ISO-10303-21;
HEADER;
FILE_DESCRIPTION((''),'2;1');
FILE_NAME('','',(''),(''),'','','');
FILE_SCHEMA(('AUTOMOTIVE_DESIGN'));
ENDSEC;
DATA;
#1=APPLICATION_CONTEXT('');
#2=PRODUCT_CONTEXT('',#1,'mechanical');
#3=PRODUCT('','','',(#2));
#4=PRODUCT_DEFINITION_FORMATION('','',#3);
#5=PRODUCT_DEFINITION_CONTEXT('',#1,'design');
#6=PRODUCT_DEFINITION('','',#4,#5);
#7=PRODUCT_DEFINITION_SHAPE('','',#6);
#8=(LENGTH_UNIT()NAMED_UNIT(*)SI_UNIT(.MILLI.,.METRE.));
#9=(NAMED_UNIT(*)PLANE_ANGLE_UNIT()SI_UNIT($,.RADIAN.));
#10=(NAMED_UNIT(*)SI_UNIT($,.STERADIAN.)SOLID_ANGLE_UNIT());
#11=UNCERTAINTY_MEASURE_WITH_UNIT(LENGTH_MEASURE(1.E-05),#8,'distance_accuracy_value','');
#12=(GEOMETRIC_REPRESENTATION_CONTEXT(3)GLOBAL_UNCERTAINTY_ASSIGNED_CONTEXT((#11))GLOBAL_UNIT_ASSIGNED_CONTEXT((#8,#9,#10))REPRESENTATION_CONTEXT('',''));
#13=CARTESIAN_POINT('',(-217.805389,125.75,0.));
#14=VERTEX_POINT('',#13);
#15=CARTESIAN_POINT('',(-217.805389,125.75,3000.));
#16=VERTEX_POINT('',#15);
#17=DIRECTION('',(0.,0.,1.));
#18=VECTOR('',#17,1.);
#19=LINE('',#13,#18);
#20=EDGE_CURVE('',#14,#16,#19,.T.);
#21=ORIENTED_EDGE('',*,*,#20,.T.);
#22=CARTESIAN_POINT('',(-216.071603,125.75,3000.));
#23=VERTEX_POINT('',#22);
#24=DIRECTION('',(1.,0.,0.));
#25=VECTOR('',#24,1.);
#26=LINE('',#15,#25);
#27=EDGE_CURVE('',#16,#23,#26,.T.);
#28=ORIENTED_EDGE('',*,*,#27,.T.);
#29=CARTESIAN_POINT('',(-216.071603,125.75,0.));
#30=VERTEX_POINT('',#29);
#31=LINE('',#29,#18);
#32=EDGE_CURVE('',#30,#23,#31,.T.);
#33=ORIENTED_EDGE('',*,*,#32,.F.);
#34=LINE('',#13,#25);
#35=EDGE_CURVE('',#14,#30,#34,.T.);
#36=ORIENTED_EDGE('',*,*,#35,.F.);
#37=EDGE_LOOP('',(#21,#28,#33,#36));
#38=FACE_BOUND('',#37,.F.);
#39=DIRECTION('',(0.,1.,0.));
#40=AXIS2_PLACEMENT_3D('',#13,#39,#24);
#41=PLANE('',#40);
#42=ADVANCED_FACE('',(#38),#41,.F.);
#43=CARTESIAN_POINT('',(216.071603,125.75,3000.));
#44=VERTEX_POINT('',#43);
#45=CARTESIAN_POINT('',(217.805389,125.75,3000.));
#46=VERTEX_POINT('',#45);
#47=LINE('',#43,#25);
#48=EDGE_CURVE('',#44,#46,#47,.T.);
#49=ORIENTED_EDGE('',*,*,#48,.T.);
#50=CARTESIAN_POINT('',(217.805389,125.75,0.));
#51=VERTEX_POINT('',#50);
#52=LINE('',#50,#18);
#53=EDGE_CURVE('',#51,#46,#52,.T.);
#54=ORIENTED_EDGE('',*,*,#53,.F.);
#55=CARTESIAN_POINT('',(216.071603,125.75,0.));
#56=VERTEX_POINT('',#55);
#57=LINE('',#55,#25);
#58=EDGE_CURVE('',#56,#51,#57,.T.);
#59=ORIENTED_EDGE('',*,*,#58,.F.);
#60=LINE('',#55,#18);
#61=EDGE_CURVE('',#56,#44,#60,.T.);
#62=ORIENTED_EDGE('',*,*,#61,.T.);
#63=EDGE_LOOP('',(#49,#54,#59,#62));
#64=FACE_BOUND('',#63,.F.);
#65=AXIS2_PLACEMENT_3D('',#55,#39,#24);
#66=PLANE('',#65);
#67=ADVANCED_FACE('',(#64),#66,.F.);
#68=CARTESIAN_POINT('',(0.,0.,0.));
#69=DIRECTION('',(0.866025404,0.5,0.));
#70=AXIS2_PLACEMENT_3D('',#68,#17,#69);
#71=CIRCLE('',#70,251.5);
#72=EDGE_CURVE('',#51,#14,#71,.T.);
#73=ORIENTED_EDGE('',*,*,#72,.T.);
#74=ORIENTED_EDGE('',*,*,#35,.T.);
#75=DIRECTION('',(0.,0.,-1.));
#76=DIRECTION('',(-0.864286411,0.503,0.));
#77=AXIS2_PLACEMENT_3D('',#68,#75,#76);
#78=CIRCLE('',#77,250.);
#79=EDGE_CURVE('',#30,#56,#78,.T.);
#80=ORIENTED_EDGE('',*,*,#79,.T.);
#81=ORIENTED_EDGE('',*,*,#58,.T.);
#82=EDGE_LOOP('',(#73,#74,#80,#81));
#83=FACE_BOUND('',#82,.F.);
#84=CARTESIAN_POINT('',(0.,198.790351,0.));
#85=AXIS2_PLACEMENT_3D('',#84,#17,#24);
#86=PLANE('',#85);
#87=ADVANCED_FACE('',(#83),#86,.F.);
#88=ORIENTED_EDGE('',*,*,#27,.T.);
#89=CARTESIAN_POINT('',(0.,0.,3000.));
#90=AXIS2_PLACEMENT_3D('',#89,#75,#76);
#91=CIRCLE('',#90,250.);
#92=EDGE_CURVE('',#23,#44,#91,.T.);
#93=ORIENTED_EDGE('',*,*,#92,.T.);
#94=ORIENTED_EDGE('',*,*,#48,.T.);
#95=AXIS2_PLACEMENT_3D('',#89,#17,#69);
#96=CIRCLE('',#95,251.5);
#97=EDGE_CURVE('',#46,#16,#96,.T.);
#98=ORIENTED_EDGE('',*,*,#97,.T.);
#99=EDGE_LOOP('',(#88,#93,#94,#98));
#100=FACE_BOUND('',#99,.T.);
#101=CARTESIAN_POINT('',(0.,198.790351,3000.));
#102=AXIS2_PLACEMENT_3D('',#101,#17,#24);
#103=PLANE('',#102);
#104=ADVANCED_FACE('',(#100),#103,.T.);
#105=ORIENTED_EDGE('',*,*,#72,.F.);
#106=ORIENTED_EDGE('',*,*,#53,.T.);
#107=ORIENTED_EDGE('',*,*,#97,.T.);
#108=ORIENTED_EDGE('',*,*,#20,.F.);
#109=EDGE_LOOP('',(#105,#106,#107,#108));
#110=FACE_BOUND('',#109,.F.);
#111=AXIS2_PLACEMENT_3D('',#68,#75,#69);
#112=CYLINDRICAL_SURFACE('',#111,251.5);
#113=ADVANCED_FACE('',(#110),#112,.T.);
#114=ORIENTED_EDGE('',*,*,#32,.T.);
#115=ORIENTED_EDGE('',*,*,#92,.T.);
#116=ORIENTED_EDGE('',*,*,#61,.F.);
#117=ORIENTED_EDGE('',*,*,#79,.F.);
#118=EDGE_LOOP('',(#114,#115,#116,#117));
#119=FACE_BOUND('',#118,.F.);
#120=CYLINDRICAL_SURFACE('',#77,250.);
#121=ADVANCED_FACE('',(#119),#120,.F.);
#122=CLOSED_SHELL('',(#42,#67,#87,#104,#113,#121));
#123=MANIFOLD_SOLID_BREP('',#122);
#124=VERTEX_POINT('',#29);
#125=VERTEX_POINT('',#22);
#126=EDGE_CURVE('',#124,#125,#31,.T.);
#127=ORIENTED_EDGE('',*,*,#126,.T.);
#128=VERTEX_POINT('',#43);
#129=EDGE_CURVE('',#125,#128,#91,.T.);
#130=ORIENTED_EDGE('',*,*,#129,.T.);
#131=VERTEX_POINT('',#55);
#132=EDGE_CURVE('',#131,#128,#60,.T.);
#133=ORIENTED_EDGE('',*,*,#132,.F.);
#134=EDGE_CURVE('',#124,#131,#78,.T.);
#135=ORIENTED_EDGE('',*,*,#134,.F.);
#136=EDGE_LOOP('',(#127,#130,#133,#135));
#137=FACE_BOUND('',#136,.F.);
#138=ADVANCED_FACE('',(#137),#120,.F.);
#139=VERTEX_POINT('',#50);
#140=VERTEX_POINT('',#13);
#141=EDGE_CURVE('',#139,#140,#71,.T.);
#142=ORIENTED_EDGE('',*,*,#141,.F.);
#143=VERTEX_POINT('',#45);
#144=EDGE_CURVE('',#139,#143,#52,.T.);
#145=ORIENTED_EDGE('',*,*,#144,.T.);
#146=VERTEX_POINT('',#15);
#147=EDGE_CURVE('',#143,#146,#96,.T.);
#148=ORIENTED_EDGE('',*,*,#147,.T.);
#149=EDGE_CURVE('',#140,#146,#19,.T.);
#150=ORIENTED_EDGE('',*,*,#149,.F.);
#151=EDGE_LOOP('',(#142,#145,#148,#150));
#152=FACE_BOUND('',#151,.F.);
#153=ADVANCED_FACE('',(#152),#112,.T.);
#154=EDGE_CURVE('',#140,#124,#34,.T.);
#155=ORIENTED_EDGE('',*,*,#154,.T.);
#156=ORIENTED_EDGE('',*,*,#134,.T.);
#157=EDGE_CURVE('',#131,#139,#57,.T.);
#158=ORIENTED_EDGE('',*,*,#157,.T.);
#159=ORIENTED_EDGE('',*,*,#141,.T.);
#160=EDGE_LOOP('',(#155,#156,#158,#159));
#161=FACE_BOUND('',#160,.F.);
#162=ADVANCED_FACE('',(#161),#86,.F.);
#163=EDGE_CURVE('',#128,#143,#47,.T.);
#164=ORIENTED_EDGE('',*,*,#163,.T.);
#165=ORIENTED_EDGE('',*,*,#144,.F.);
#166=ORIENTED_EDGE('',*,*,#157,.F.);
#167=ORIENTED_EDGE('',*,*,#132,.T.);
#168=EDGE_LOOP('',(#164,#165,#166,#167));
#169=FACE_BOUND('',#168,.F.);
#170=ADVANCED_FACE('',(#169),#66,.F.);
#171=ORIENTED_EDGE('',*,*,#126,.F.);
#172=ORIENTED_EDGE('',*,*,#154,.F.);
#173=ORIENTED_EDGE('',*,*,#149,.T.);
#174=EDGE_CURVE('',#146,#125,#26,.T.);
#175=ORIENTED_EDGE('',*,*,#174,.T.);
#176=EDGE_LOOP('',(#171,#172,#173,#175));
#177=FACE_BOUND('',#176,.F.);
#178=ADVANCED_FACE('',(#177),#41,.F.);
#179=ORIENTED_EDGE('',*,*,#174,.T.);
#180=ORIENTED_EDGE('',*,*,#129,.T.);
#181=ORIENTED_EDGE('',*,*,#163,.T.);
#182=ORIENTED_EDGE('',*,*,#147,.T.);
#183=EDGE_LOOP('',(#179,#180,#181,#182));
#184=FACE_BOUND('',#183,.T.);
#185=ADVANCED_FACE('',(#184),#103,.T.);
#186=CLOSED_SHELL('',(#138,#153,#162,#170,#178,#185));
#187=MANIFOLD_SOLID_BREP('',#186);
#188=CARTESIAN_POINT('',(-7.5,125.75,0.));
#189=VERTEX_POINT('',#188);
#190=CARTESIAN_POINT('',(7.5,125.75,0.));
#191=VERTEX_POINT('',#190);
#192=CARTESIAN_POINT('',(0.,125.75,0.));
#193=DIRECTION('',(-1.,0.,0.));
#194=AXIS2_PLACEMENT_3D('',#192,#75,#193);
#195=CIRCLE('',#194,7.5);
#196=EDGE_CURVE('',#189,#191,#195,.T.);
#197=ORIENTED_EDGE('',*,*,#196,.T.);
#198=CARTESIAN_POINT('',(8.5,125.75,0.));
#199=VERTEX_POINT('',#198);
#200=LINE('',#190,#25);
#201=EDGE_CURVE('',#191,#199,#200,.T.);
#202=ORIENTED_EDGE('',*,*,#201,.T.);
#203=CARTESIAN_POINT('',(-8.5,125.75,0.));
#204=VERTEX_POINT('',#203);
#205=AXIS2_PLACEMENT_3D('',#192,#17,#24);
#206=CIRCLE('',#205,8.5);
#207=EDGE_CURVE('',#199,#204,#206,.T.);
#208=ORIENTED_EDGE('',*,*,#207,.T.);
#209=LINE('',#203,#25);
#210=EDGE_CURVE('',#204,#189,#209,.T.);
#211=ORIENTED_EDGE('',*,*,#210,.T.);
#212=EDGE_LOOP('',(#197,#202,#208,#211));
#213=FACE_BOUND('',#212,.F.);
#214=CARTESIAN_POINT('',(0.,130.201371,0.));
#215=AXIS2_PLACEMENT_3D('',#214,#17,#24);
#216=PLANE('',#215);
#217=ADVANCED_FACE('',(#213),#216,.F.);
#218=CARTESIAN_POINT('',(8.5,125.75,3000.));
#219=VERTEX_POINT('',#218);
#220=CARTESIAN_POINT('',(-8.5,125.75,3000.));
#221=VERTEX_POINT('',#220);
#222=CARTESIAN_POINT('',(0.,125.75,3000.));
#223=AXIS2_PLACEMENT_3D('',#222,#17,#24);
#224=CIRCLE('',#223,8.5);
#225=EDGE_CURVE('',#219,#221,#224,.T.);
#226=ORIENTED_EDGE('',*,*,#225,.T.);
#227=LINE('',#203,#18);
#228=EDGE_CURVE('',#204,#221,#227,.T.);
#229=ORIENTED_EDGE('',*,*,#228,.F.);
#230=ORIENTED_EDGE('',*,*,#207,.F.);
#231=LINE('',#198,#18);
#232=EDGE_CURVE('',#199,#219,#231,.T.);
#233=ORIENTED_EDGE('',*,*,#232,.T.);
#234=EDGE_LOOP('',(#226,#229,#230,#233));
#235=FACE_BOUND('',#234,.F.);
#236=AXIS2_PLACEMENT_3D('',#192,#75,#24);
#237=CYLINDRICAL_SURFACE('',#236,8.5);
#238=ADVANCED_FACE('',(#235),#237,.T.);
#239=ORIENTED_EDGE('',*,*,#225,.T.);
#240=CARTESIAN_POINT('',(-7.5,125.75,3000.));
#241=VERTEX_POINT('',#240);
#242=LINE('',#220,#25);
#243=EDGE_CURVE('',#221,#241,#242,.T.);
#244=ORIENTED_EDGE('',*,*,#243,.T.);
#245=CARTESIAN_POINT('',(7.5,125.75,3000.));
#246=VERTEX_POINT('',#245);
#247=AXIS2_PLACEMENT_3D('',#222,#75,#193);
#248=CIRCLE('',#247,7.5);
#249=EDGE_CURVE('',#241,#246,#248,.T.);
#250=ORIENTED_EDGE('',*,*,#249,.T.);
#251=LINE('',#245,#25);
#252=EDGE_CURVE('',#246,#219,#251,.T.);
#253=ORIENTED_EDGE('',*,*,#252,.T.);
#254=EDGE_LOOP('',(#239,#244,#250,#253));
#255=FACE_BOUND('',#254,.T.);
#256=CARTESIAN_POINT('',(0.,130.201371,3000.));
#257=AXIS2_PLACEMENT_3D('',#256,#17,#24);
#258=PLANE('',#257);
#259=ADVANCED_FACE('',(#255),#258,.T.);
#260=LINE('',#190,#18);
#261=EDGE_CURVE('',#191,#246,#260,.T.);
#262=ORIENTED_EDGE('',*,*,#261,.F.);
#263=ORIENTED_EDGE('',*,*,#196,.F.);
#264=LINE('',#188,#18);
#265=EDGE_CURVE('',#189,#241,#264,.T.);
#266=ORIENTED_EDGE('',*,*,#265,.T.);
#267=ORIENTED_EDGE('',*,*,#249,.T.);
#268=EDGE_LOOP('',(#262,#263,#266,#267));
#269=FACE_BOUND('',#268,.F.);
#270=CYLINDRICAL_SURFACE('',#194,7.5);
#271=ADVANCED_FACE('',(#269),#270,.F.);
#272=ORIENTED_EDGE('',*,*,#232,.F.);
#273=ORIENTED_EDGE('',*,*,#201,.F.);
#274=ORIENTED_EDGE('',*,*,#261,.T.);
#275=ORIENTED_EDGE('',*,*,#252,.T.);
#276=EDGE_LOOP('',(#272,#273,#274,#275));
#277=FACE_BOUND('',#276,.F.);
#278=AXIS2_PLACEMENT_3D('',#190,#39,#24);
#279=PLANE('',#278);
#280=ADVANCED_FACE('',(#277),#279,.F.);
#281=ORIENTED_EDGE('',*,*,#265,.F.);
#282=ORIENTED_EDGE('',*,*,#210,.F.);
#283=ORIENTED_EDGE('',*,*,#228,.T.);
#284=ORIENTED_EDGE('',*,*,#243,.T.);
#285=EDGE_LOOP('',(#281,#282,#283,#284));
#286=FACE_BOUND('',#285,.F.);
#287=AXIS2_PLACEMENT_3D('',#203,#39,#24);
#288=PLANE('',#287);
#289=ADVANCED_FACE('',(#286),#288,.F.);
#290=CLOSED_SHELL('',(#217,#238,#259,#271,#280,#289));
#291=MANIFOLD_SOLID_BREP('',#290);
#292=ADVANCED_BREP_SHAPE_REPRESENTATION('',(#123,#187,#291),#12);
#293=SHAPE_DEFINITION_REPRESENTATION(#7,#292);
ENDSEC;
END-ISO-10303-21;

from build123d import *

# Parameters (mm, degrees)
F1_DEPTH = 3000
F2_DEPTH = 3000


with BuildPart() as f1:
    # F0 (on Top) → F1 (new body)
    with BuildSketch(Plane.XY):
        with BuildLine():
            ThreePointArc((-216.0716027154, 125.75), (0, 250), (216.0716027154, 125.75))
            Line((216.0716027154, 125.75), (217.8053890518, 125.75))
            ThreePointArc((217.8053890518, 125.75), (0, 251.5), (-217.8053890518, 125.75))
            Line((-217.8053890518, 125.75), (-216.0716027154, 125.75))
        make_face()
    extrude(amount=F1_DEPTH)


with BuildPart() as f2:
    # F0 (on Top) → F2 (new body)
    with BuildSketch(Plane.XY):
        with BuildLine():
            ThreePointArc((-216.0716027154, 125.75), (0, 250), (216.0716027154, 125.75))
            Line((216.0716027154, 125.75), (217.8053890518, 125.75))
            ThreePointArc((217.8053890518, 125.75), (0, 251.5), (-217.8053890518, 125.75))
            Line((-217.8053890518, 125.75), (-216.0716027154, 125.75))
        make_face()
    extrude(amount=F2_DEPTH)


with BuildPart() as f2b:
    # F0 (on Top) → F2, piece 2 (new body)
    with BuildSketch(Plane.XY):
        with BuildLine():
            ThreePointArc((-7.5, 125.75), (0, 133.25), (7.5, 125.75))
            Line((7.5, 125.75), (8.5, 125.75))
            ThreePointArc((8.5, 125.75), (0, 134.25), (-8.5, 125.75))
            Line((-8.5, 125.75), (-7.5, 125.75))
        make_face()
    extrude(amount=F2_DEPTH)


solid = Compound([f1.part, f2.part, f2b.part])
